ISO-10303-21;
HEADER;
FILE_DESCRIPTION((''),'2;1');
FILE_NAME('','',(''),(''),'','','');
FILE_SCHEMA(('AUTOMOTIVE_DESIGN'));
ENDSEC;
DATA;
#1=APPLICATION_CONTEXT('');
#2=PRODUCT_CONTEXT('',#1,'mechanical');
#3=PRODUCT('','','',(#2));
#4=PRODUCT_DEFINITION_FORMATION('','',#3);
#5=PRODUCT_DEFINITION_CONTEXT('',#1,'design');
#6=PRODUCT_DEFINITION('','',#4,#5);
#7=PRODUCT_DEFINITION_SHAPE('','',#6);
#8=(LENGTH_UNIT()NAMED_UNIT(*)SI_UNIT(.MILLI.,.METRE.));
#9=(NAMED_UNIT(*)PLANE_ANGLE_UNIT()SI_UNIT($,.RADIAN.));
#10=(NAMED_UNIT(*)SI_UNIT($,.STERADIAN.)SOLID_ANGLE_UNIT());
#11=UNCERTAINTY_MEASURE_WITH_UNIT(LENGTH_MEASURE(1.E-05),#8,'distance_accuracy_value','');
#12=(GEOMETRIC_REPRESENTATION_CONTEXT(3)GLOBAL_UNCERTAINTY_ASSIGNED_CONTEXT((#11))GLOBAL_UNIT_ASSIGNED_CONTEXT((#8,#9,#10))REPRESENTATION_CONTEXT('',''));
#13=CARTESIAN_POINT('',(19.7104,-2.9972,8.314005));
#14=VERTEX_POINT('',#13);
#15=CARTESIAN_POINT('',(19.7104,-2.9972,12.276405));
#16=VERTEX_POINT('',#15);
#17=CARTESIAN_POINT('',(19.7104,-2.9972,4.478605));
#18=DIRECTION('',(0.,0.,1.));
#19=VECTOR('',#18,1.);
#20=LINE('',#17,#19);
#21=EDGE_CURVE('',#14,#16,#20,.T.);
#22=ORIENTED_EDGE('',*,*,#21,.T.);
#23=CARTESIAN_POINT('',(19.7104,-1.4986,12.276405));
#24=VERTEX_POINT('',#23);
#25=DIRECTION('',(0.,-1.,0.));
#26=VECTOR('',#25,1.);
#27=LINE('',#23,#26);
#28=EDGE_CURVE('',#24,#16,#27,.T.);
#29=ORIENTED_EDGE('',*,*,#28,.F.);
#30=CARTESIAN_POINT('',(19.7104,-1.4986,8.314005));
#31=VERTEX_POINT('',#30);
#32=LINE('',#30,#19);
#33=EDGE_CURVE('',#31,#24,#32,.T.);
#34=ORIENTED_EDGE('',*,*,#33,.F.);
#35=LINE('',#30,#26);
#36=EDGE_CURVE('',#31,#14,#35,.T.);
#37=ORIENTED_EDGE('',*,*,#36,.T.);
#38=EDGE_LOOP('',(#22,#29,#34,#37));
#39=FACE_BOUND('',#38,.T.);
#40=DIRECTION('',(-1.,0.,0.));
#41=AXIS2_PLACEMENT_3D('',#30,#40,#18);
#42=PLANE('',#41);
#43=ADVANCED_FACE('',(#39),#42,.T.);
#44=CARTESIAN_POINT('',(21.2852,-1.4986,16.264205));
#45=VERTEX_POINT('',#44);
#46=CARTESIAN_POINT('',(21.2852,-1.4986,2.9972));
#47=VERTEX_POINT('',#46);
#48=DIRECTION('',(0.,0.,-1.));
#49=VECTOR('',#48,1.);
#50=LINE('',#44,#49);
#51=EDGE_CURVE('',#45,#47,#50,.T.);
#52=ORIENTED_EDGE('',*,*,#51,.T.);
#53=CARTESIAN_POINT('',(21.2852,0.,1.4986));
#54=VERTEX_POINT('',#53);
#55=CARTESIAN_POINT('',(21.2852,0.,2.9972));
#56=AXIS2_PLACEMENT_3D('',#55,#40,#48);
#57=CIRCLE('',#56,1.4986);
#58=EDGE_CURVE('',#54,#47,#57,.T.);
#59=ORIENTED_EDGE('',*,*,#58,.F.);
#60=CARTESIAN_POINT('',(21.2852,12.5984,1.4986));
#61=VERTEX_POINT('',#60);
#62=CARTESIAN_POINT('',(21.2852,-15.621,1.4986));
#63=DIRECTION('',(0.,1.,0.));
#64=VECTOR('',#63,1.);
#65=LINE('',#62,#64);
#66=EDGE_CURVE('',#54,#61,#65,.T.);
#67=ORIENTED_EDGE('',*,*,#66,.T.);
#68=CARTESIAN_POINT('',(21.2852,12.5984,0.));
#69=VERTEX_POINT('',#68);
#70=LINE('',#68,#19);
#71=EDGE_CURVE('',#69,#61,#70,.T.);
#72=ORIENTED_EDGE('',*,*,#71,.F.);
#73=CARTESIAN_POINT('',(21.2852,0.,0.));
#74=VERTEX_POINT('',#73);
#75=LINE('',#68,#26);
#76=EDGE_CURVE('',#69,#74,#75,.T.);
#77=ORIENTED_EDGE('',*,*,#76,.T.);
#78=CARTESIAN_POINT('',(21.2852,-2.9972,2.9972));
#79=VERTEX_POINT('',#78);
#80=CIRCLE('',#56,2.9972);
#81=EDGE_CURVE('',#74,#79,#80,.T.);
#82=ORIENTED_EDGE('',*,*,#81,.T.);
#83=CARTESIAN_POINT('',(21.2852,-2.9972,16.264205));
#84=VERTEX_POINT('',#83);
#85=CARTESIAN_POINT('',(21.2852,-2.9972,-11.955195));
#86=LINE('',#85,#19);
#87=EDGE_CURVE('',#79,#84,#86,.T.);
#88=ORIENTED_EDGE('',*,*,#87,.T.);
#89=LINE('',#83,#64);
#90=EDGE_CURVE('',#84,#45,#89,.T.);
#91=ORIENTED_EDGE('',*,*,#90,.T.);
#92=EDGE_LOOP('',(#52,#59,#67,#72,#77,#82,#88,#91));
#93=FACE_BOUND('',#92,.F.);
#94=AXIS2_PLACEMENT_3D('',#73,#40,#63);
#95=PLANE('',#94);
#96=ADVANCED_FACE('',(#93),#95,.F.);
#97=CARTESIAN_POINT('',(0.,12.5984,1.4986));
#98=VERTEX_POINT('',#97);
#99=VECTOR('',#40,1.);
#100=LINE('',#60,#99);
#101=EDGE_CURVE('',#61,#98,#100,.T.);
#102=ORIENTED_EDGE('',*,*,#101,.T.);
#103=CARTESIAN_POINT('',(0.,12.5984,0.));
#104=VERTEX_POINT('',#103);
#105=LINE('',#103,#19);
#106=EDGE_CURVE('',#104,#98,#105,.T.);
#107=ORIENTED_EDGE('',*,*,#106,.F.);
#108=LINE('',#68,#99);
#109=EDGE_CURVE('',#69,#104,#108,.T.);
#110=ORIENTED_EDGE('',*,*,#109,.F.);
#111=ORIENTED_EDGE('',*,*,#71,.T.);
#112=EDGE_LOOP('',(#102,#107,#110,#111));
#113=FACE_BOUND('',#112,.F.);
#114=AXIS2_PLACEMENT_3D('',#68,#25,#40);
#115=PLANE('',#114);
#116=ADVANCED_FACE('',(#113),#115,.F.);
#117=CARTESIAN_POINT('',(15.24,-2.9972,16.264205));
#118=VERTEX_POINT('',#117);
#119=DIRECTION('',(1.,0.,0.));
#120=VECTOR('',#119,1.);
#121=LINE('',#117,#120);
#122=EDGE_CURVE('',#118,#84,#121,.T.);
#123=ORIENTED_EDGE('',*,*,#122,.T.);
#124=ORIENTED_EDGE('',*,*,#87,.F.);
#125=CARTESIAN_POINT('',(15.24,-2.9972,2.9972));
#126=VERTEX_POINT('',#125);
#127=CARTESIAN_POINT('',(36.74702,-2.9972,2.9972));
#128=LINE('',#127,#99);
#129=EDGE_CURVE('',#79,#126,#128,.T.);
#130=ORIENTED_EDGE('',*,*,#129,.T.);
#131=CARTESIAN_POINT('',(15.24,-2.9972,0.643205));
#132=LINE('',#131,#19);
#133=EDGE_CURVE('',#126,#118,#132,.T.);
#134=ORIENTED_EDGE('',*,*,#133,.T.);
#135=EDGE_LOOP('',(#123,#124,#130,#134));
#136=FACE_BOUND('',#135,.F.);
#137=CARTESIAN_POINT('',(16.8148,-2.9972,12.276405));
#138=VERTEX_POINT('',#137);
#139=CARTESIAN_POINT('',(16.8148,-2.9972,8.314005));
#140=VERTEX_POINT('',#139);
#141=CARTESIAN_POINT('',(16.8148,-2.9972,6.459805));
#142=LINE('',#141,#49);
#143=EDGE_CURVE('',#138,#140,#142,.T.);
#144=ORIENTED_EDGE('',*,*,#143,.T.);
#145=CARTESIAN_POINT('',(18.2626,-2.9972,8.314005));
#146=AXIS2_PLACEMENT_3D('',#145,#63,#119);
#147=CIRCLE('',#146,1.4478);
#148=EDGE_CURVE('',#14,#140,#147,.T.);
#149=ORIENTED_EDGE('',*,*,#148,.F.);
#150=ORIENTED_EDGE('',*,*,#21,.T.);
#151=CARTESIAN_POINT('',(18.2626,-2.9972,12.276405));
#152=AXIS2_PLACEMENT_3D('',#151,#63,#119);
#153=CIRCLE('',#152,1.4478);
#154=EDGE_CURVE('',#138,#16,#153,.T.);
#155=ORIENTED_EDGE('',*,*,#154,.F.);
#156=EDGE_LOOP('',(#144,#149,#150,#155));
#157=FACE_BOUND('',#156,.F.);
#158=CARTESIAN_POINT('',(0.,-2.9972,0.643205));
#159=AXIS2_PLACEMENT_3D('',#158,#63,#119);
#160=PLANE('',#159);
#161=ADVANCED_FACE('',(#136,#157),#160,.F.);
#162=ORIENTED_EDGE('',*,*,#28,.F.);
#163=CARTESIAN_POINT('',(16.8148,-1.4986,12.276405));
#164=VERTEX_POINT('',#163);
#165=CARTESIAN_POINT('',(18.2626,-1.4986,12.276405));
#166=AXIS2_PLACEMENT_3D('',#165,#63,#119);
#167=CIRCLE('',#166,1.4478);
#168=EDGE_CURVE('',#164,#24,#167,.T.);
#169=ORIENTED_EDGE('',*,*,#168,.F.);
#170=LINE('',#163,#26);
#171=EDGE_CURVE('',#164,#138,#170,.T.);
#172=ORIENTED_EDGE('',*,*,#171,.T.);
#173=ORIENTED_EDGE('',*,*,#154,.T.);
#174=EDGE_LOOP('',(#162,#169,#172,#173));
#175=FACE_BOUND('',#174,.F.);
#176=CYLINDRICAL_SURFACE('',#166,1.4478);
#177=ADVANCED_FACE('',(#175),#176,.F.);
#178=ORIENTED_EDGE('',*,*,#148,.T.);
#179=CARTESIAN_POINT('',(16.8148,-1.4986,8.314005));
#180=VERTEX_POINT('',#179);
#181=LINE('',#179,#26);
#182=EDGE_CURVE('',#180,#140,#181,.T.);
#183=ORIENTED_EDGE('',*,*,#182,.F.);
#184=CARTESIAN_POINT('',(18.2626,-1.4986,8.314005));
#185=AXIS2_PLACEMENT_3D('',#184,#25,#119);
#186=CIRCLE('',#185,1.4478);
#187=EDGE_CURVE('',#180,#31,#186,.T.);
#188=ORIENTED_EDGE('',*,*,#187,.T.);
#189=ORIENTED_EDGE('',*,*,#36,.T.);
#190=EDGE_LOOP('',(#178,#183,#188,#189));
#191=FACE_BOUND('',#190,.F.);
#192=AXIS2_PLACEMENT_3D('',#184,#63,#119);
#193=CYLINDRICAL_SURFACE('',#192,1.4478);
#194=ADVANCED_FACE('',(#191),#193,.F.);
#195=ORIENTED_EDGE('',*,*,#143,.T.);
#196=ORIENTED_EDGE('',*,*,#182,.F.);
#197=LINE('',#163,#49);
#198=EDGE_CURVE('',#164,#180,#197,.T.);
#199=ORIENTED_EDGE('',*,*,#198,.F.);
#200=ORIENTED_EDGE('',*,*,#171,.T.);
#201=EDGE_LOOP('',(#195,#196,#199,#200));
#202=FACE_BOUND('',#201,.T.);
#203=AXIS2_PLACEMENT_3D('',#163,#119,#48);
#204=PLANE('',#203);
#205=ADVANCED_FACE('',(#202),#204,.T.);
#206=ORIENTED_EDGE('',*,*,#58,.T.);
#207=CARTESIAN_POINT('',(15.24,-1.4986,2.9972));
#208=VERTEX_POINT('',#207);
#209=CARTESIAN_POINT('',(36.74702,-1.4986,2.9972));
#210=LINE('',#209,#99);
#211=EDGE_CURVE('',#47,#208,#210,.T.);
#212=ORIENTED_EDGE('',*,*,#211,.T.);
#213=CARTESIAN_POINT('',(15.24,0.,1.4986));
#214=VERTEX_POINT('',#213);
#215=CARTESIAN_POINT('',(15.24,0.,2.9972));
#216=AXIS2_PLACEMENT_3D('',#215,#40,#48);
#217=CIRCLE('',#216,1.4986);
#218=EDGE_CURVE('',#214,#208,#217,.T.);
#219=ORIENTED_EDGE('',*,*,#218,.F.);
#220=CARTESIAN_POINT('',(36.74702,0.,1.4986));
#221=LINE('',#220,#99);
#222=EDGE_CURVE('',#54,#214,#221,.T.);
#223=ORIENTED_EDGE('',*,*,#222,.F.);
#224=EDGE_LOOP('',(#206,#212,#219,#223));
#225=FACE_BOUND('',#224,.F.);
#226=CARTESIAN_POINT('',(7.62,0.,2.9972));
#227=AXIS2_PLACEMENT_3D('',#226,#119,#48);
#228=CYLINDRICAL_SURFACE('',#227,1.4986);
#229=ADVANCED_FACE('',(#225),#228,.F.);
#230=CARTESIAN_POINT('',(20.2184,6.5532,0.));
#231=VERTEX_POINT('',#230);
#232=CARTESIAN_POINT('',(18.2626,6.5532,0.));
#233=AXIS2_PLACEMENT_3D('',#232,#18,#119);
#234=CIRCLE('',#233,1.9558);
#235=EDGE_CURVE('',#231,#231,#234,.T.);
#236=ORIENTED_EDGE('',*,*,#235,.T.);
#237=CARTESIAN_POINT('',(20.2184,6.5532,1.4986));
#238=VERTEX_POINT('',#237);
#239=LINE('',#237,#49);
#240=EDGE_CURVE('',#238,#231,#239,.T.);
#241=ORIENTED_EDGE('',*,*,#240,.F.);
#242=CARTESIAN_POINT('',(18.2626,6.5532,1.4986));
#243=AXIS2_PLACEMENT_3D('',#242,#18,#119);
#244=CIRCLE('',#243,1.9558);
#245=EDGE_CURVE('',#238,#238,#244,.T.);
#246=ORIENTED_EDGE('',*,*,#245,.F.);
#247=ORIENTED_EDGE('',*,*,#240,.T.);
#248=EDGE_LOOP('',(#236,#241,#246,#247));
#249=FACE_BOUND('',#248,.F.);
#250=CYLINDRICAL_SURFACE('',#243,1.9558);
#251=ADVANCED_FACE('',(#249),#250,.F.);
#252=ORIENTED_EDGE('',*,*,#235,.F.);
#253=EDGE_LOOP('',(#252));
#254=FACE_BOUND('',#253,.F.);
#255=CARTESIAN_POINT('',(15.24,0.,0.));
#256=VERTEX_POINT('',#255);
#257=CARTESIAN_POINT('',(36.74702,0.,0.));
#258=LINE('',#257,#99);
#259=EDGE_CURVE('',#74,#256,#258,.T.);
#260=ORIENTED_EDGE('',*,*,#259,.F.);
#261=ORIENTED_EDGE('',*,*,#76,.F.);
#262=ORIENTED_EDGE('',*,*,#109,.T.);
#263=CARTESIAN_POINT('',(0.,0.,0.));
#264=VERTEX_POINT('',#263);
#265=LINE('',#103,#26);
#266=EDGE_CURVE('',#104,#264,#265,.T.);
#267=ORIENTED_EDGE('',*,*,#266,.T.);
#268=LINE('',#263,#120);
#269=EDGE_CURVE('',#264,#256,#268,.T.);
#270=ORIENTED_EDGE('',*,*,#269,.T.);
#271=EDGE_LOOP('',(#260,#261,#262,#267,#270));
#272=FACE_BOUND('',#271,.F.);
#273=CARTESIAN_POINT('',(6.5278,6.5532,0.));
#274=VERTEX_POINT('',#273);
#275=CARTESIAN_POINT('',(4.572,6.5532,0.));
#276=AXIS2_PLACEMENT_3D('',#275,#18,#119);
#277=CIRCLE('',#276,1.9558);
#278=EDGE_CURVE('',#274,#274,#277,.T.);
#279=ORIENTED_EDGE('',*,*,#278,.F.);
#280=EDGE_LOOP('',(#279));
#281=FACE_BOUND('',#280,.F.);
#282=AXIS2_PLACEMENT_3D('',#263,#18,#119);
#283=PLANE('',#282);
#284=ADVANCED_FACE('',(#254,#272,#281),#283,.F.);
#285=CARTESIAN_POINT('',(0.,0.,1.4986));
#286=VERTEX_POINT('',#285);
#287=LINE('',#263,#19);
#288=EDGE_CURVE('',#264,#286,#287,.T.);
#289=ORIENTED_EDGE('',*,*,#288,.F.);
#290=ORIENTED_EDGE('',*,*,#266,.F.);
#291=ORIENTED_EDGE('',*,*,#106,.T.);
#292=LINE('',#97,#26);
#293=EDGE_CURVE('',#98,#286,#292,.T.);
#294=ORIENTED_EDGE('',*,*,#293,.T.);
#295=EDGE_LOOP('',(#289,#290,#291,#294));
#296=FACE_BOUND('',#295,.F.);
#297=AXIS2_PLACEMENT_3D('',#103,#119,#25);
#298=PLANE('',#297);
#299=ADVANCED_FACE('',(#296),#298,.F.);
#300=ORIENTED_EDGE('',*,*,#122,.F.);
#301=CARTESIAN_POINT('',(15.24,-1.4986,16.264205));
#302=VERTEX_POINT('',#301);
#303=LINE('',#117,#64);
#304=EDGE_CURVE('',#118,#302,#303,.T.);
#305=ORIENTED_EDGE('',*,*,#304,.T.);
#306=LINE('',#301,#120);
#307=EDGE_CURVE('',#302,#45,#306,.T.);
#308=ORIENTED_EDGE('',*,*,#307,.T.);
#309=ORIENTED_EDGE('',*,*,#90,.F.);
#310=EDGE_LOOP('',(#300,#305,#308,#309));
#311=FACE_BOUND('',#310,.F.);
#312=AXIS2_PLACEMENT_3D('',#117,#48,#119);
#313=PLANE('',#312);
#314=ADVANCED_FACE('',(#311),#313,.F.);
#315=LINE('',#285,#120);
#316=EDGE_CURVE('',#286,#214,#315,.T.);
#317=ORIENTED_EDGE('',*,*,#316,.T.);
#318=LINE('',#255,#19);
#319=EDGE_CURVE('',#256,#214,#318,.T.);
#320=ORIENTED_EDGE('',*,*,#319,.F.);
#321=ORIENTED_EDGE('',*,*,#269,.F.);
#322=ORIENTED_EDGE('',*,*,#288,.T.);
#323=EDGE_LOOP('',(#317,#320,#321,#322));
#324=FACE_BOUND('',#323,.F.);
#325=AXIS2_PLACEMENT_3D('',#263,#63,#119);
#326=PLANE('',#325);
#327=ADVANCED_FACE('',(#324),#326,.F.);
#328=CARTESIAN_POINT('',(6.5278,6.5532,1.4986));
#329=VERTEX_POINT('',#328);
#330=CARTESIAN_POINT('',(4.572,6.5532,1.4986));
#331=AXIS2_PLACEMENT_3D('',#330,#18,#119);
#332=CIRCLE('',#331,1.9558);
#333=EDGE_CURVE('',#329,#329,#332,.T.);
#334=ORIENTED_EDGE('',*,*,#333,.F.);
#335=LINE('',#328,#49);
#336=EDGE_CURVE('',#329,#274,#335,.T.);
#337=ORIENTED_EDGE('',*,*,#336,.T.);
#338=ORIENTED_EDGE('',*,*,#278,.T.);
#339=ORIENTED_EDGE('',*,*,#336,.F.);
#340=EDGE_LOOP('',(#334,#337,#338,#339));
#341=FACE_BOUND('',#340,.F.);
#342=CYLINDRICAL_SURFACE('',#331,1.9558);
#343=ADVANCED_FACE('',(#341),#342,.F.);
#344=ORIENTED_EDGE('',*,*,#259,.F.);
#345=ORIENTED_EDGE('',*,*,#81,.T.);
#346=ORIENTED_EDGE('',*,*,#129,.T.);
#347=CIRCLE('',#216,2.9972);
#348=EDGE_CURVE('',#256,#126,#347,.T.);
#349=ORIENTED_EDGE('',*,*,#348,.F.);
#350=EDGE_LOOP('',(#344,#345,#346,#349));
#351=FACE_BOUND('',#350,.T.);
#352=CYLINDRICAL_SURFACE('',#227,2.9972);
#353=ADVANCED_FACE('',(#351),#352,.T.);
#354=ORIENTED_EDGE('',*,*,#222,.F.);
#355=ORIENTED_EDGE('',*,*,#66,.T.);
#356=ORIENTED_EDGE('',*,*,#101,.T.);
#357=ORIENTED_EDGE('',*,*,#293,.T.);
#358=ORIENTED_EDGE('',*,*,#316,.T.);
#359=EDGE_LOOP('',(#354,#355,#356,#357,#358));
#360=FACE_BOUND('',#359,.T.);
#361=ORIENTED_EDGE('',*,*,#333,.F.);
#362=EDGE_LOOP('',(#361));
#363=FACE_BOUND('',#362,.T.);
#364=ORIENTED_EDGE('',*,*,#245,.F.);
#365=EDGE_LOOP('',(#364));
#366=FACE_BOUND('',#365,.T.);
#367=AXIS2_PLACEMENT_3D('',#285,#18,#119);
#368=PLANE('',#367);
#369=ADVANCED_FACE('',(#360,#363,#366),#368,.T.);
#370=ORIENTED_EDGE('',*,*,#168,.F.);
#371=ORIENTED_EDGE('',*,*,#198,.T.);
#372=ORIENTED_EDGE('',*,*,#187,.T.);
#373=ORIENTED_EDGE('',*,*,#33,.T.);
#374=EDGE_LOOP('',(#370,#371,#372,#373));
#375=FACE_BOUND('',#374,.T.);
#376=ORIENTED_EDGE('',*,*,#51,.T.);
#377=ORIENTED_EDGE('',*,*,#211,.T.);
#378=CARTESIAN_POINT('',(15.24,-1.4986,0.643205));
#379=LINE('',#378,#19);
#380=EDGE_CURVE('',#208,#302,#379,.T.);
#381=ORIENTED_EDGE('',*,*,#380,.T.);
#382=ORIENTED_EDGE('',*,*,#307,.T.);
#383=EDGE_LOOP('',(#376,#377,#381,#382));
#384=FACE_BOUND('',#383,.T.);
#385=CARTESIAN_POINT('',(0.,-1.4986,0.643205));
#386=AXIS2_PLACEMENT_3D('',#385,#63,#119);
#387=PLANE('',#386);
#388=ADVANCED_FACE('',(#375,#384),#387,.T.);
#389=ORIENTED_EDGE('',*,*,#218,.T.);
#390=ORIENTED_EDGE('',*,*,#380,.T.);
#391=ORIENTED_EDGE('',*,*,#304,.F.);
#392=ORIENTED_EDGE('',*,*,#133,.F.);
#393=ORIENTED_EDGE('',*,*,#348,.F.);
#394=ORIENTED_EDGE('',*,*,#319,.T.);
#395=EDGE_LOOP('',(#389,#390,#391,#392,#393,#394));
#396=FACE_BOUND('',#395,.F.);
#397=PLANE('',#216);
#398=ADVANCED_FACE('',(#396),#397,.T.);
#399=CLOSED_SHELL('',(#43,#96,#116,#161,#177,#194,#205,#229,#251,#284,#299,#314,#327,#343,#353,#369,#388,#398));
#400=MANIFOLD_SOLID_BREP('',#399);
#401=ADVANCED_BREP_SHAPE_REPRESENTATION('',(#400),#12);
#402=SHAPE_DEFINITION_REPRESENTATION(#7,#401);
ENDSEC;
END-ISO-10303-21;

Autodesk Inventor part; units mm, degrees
ref_plane "YZ Plane" through (0, 0, 0) normal (1, 0, 0) x (0, 1, 0)
ref_plane "XZ Plane" through (0, 0, 0) normal (0, 1, 0) x (-1, 0, 0)
ref_plane "XY Plane" through (0, 0, 0) normal (0, 0, 1) x (1, 0, 0)
sketch "Sketch1" plane through (0, 0, 0) normal (0, 0, 1) x (1, 0, 0)
  line L0 (0, 0) -> (15.24, 0)
  line L1 (21.2852, 0) -> (21.2852, 12.5984)
  line L2 (21.2852, 12.5984) -> (0, 12.5984)
  line L3 (0, 12.5984) -> (0, 0)
  line L4 (15.24, 0) -> (15.24, -15.621)
  line L5 (15.24, -15.621) -> (21.2852, -15.621)
  line L6 (21.2852, -15.621) -> (21.2852, 0)
  line L7 (0, 0) -> (15.24, 0)
  dimension "d0" = 21.2852
  dimension "d1" = 12.5984
  dimension "d2" = 6.0452
  dimension "d3" = 15.621
extrude "Extrusion1" add sketch "Sketch1" along normal blind 1.4986
sketch "Sketch2" plane through (0, 0, 1.4986) normal (0, 0, 1) x (1, 0, 0)
  circle A0 centre (4.572, 6.5532) radius 1.9558
  line L0 (21.2852, 12.5984) -> (0, 12.5984) projected
  line L1 (0, 12.5984) -> (0, 0) projected
  circle A1 centre (18.2626, 6.5532) radius 1.9558
  dimension "d6" = 3.9116
  dimension "d7" = 6.0452
  dimension "d8" = 4.572
  dimension "d11" = 13.6906
extrude "Extrusion2" cut sketch "Sketch2" against normal blind 25.4
sketch "Sketch3" plane through (0, 0, 1.4986) normal (0, 0, 1) x (1, 0, 0)
  circle A0 centre (18.2626, -11.6332) radius 1.4478
  line L0 (15.24, -15.621) -> (21.2852, -15.621) projected
  line L1 (15.24, 0) -> (15.24, -15.621) projected
  circle A1 centre (18.2626, -7.6708) radius 1.4478
  line L2 (16.8148, -7.6708) -> (18.2626, -7.6708)
  line L3 (19.7104, -11.6332) -> (17.1196, -11.6332)
  point P0 (0, 0)
  dimension "d18" = 2.8956
  dimension "d19" = 3.9878
  dimension "d20" = 3.0226
  dimension "d26" = 3.9624
extrude "Extrusion4" cut sketch "Sketch3" against normal blind 25.4
sketch "Sketch6" plane through (0, 0, 1.4986) normal (0, 0, 1) x (1, 0, 0)
  circle A0 centre (18.2626, -7.6708) radius 1.4478 projected
  circle A1 centre (18.2626, -11.6332) radius 1.4478 projected
  line L0 (16.8148, -7.6708) -> (19.7104, -7.6708)
  line L1 (19.7104, -7.6708) -> (19.7104, -11.6332)
  line L2 (19.7104, -11.6332) -> (16.8148, -11.6332)
  line L3 (16.8148, -11.6332) -> (16.8148, -7.6708)
  point P0 (0, 0)
extrude "Extrusion5" cut sketch "Sketch6" against normal blind 25.4 contours L1 A1 L3 A0 | A0 L0 | L2 A1 picked at (18.2044, -8.1499) picked at (18.4337, -11.182)
sketch "Sketch16" plane through (0, 0, 1.4986) normal (0, 0, 1) x (1, 0, 0)
  line L0 (0, 0) -> (15.24, 0) projected
  line L1 (15.24, 0) -> (21.2852, 0)
  line L2 (21.2852, -15.621) -> (21.2852, 12.5984) projected
bend part "Bend Part2" radius 1.4986 angle 90 line through (15.24, 0, 1.4986) along (1, 0, 0) centre toward (0, 0, 1) moving side (0, -1, 0) both sides no
equation "\"BendRadius\" = Thickness"
equation "\"BendReliefWidth\" = Thickness"
equation "\"BendReliefDepth\" = 0.5 * Thickness"
equation "\"CornerReliefSize\" = 4 * Thickness"
equation "\"MinimumRemnant\" = 2 * Thickness"
equation "\"TransitionRadius\" = BendRadius"
equation "\"JacobiRadiusSize\" = Thickness"
equation "\"GapSize\" = Thickness"
equation "\"Thickness\" = 3.048"
properties part number "dsub37bracket_redraw"
